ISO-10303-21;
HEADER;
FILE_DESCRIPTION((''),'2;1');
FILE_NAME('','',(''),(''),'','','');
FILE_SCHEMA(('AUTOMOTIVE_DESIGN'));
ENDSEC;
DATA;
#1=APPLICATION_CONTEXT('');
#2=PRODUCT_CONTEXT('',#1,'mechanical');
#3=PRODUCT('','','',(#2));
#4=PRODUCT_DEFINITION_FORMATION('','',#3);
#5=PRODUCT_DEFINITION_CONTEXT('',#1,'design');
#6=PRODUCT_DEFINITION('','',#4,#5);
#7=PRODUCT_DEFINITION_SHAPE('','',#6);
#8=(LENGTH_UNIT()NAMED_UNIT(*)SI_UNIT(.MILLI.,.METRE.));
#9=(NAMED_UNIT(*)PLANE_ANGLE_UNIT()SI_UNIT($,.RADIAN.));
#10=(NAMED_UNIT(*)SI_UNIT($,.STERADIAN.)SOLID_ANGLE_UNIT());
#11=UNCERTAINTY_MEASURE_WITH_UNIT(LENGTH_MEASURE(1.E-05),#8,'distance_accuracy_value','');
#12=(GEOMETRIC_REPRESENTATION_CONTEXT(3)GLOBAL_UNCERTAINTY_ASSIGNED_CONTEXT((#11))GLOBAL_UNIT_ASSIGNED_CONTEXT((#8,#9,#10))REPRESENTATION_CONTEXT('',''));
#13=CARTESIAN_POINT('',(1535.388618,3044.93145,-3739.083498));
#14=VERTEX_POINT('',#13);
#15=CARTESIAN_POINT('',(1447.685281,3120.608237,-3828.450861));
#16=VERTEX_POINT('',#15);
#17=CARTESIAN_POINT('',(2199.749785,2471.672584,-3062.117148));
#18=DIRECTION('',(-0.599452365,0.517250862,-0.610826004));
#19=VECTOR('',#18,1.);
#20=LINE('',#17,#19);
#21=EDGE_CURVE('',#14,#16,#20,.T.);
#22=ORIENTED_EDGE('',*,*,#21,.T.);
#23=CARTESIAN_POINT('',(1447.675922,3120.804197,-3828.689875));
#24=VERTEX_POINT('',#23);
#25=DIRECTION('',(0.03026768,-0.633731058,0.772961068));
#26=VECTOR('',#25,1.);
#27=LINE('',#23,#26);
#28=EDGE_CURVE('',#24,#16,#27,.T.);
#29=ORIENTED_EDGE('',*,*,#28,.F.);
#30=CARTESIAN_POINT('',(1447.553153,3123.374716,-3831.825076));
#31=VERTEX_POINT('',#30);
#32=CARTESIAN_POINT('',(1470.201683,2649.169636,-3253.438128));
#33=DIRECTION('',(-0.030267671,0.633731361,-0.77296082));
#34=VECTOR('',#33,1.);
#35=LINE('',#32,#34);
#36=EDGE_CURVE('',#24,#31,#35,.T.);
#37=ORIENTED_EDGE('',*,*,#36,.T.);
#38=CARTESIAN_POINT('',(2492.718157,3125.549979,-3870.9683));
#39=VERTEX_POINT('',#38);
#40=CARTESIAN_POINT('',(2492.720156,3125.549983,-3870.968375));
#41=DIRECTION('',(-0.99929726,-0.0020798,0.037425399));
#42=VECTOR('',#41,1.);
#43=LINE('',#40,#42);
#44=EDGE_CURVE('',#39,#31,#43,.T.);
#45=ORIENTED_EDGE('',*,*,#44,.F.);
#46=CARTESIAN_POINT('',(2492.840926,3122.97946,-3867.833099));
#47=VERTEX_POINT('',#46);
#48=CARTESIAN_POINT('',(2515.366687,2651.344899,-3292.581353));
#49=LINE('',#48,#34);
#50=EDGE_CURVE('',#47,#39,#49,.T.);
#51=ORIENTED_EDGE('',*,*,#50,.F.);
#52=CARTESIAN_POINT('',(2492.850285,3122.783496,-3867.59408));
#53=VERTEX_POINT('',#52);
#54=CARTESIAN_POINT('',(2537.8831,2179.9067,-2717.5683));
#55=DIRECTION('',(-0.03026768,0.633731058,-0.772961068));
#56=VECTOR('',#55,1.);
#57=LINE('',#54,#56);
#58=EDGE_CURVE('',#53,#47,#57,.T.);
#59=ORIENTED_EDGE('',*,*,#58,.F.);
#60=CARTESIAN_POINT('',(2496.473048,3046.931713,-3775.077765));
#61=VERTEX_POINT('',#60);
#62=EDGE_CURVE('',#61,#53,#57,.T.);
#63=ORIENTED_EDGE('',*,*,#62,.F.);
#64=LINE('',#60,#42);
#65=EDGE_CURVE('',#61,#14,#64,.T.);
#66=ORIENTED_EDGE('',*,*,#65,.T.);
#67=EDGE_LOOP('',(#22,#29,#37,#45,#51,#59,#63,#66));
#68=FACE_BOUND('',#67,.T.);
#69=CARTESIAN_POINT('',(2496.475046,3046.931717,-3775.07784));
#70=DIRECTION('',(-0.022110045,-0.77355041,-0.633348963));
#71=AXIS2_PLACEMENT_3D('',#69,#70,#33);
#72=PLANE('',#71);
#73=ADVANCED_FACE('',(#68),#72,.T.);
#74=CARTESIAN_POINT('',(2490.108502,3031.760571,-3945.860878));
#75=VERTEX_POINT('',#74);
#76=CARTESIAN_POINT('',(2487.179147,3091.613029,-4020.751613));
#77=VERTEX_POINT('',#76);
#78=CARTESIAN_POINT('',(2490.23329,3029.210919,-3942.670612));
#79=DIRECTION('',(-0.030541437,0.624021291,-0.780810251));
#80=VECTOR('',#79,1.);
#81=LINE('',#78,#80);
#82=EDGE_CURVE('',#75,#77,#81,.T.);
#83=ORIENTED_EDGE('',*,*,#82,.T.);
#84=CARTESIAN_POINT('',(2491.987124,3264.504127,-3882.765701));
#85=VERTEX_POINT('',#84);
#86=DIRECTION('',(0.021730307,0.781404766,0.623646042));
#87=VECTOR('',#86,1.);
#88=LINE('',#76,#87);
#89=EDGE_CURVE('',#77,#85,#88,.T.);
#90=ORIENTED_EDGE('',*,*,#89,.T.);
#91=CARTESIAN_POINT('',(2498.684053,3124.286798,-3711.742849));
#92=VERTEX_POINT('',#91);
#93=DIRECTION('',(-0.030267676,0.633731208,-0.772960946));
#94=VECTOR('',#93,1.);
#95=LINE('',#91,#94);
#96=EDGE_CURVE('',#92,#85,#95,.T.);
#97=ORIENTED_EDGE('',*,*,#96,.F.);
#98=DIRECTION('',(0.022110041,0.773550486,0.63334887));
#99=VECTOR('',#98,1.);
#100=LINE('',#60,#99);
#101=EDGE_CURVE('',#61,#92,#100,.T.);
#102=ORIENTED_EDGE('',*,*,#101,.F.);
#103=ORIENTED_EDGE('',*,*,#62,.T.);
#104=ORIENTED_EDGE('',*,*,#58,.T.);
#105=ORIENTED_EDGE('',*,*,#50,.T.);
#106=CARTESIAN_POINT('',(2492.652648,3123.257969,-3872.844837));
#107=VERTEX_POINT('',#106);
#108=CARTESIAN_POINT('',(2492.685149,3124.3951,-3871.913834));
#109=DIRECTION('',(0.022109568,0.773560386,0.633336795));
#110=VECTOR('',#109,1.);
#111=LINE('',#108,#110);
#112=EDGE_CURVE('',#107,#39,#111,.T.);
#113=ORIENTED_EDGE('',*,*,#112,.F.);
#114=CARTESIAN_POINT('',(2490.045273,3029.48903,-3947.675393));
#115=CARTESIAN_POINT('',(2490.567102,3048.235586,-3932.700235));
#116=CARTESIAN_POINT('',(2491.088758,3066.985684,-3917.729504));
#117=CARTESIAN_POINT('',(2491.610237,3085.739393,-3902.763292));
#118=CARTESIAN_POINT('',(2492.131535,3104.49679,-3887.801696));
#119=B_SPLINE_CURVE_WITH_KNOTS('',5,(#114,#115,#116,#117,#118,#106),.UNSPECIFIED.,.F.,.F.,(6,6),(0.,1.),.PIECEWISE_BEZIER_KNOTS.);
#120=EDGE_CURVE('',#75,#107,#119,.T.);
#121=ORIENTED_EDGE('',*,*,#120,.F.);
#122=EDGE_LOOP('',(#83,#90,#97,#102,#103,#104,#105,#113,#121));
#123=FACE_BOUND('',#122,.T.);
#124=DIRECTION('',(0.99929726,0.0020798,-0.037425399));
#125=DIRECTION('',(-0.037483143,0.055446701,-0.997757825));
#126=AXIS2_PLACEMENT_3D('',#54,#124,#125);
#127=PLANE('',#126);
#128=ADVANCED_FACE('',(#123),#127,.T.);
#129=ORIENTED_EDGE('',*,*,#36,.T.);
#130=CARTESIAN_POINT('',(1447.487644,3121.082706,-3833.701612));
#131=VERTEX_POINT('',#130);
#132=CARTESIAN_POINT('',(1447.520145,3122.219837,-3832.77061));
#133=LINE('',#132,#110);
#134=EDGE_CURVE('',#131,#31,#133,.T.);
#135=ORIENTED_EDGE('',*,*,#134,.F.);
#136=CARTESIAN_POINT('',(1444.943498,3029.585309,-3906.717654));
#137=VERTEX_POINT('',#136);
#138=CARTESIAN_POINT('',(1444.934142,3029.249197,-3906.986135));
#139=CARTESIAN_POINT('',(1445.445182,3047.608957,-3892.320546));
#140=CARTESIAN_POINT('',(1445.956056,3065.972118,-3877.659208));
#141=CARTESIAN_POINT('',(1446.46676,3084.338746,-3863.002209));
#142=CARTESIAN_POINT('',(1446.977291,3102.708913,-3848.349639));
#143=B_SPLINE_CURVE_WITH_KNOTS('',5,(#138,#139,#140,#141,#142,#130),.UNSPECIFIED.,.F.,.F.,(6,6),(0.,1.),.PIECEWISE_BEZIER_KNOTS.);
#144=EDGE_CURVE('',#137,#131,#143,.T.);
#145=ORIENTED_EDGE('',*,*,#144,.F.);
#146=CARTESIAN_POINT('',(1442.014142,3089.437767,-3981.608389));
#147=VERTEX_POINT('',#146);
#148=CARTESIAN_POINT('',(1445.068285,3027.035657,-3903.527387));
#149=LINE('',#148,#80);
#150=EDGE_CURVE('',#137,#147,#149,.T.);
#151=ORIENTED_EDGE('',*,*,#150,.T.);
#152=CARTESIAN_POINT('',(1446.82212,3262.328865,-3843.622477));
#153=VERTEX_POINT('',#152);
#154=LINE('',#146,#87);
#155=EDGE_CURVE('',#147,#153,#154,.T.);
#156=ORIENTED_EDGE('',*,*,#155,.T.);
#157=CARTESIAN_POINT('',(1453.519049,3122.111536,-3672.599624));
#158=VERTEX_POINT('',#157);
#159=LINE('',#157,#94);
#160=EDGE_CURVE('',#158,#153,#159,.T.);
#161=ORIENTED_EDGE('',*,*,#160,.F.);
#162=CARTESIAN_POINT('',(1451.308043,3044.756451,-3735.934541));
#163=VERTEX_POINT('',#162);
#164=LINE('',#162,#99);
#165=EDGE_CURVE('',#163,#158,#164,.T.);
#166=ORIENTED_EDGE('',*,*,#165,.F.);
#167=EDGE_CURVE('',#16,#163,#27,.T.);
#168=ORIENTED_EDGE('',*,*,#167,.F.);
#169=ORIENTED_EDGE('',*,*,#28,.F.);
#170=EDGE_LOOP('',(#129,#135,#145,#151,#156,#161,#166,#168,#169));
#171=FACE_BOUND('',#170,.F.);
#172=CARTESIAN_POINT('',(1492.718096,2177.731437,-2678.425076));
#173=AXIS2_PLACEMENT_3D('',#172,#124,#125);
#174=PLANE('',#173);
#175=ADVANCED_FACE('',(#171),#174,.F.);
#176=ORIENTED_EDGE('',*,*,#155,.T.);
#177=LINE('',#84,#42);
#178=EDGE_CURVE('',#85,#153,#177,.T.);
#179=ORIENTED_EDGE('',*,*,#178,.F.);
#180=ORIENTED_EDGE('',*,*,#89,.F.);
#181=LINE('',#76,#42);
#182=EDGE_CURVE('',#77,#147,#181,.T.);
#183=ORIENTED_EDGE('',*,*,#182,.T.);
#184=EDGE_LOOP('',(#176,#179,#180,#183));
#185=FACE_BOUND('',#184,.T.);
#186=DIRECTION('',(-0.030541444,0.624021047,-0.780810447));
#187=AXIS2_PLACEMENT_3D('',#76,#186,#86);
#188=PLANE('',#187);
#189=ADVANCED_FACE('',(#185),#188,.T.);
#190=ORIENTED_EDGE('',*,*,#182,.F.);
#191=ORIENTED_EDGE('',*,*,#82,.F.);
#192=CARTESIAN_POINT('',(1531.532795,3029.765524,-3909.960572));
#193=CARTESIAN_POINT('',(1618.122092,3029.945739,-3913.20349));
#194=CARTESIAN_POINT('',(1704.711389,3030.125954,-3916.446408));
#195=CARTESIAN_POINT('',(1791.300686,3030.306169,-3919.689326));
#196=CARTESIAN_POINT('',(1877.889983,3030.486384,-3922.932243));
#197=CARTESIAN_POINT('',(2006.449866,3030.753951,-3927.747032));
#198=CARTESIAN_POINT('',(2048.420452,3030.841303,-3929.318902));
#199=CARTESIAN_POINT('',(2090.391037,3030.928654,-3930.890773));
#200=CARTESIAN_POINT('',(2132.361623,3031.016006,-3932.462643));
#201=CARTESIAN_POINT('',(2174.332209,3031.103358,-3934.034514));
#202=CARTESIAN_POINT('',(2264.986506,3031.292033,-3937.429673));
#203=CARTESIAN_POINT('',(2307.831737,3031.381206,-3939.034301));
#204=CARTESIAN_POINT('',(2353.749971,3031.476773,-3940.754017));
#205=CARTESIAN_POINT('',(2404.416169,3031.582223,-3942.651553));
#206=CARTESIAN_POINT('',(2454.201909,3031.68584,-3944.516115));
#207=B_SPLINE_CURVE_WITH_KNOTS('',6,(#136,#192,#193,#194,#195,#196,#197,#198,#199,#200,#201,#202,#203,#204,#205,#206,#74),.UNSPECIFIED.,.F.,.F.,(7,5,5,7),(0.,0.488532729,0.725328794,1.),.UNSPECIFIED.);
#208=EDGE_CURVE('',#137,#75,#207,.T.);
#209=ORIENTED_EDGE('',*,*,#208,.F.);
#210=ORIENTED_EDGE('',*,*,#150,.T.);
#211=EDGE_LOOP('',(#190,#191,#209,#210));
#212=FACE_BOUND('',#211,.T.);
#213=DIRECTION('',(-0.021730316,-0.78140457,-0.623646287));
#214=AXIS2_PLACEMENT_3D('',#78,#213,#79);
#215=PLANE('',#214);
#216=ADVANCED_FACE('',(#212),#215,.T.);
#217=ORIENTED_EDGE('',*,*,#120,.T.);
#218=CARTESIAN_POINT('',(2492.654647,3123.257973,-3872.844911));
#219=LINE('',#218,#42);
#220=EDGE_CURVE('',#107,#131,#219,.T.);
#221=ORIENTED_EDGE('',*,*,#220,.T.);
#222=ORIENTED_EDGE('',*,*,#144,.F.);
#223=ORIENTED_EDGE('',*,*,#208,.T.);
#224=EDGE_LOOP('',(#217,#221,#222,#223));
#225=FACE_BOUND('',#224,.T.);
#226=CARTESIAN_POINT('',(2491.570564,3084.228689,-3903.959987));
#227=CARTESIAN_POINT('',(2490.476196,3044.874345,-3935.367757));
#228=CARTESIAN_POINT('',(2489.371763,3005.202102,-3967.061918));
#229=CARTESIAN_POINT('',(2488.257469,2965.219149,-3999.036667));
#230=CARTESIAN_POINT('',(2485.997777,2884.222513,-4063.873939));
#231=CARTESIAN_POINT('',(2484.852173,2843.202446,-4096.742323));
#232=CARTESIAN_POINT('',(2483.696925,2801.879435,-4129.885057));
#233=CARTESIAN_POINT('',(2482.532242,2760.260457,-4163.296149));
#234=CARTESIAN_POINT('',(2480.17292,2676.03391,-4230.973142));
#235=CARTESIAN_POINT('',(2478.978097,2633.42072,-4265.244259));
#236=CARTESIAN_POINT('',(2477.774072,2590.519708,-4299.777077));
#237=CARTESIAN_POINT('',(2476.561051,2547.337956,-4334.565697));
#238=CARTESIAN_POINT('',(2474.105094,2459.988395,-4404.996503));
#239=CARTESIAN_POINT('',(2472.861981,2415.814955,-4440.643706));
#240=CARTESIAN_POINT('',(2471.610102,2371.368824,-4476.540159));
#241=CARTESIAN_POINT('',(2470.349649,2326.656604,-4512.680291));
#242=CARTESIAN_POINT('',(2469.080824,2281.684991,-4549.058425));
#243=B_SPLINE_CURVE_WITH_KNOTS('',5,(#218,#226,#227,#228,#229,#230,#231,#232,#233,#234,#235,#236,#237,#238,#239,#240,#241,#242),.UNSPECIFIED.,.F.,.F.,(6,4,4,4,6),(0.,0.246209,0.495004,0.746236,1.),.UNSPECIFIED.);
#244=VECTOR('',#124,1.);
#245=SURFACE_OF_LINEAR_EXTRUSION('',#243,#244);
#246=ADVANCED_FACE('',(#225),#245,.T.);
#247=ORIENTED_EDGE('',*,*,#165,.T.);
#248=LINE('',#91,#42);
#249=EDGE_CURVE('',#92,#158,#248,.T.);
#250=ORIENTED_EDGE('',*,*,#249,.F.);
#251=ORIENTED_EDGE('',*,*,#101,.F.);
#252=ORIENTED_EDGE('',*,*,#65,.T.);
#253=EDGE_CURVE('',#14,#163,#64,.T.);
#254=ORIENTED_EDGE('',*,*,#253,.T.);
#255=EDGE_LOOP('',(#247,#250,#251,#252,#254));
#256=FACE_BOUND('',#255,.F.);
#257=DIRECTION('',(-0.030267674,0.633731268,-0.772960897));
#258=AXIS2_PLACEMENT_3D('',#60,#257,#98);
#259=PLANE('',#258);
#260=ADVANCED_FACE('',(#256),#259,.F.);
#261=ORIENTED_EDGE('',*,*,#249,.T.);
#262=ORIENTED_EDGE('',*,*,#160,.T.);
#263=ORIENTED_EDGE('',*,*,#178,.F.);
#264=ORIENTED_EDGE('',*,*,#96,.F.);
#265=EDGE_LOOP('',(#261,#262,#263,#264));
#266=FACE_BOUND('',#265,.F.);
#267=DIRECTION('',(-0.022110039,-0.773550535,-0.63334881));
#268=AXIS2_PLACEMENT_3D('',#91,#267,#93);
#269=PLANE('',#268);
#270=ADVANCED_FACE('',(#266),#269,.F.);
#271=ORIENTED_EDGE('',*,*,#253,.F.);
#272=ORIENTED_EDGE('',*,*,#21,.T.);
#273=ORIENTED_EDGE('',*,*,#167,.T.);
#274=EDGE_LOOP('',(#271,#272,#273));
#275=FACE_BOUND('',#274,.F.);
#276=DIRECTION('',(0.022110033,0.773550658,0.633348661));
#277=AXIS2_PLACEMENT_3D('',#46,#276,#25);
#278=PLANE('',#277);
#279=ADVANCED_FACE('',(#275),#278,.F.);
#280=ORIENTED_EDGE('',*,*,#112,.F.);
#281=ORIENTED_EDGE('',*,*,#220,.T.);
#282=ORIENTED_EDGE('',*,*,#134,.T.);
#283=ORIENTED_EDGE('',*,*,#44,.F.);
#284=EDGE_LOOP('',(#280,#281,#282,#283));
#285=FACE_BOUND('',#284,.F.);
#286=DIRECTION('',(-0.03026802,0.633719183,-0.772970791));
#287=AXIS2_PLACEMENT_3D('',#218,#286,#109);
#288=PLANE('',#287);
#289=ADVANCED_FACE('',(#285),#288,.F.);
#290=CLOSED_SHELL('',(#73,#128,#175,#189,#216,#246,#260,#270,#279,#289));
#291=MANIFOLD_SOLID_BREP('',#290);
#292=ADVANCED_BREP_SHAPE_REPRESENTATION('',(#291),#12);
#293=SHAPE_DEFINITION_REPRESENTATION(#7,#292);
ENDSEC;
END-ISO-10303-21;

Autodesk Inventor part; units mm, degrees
sketch "Sketch1" plane through (0, 0, 0) normal (0, 0, 1) x (1, 0, 0)
  arc A0 (4796.3585, -1909.6289) -> (3343.4744, 1121.5056) centre (-3903.1767, -4215.7265) ccw
  line L0 (3236.8192, 1046.7661) -> (3343.5051, 1121.464)
  arc A1 (3228.7635, 1285.3391) -> (1546.1726, 3076.3751) centre (-4110.5601, -3923.7232) ccw
  line L1 (3228.7635, 1285.3391) -> (3122.0787, 1210.6419)
  line L2 (1372.9503, 3176.3452) -> (1308.1705, 3064.1503)
  arc A2 (1372.9503, 3176.3452) -> (93.8576, 4024.2684) centre (-4221.2651, -3873.8147) ccw
  line L3 (1481.3729, 2964.1457) -> (1546.1726, 3076.3751)
  arc A3 (4543.4821, -2147.4888) -> (93.8528, 3844.2289) centre (-4256.4671, -4034.5221) ccw
  line L4 (93.8576, 4024.2684) -> (93.8528, 3844.2289)
  line L5 (1308.1705, 3064.1503) -> (1481.3729, 2964.1457)
  line L6 (3122.0787, 1210.6419) -> (3236.8192, 1046.7661)
  arc A4 (4543.4821, -2147.4888) -> (4796.3585, -1909.6289) centre (4134.8595, -1459.7188) ccw
  point P0 (0, 0)
  dimension "d7" = 800
ref_plane "Work Plane2" through (0, 0, -8101) normal (0, 0, 1) x (1, 0, 0)
ref_plane "Work Plane1" through (0, 0, 0) normal (0, 0, 1) x (1, 0, 0)
sketch "Sketch2" plane through (0, 0, -8101) normal (0, 0, 1) x (1, 0, 0)
  arc A0 (1192.0552, 3508.338) -> (93.8528, 4294.485) centre (-5164.5547, -4211.3454) ccw projected
  arc A1 (3133.8513, 1483.0798) -> (1365.2603, 3408.338) centre (-5051.6105, -4261.3276) ccw projected
  arc A2 (4543.6426, -2147.8414) -> (93.8528, 4114.0508) centre (-5207.4444, -4365.1147) ccw projected
  line L0 (1192.0552, 3508.338) -> (1126.9741, 3395.6142) projected
  line L1 (1365.2603, 3408.338) -> (1300.1792, 3295.6142) projected
  line L2 (1126.9741, 3395.6142) -> (1300.1792, 3295.6142) projected
  line L3 (93.8528, 4294.485) -> (93.8528, 4114.0508) projected
  line L4 (3027.6129, 1408.6909) -> (3133.8513, 1483.0798) projected
  line L5 (3142.3282, 1244.8605) -> (3248.5665, 1319.2494) projected
  line L6 (3027.6129, 1408.6909) -> (3142.3282, 1244.8605) projected
  arc A3 (4803.6655, -1899.2732) -> (3248.5665, 1319.2494) centre (-4832.968, -4570.4704) ccw projected
  arc A4 (4543.6426, -2147.8414) -> (4803.6655, -1899.2732) centre (4135.0016, -1460.0824) ccw projected
  point P0 (0, 0)
loft "Loft1" add profiles "Sketch1", "Sketch2"
ref_plane "Work Plane3" through (2600, 0, 0) normal (1, 0, 0) x (0, 1, 0)
sketch "Sketch3" plane through (2600, 0, 0) normal (1, 0, 0) x (0, 1, 0)
  line L0 (3120.8038, -3828.6818) -> (2179.9067, -2717.5683)
  line L1 (2179.9067, -2717.5683) -> (2281.1646, -4539.693)
  line L2 (2281.1646, -4539.693) -> (3120.8038, -3828.6818)
  line L3 (4534.6211, 332.5956) -> (-2270.5383, 332.5956)
  line L4 (-2270.5383, 332.5956) -> (-2270.5383, -8394.1003)
  line L5 (-2270.5383, -8394.1003) -> (4534.6211, -8394.1003)
  line L6 (4534.6211, -8394.1003) -> (4534.6211, 332.5956)
  point P0 (0, 0)
extrude "Extrusion1" cut sketch "Sketch3" along normal through all both and the other way through all
sketch "Sketch5" plane through (2219.0112, 2281.1646, -4539.693) normal (0, -0.9984595, -0.0554857) x (1, 0, 0)
  line L0 (318.8718, 1824.936) -> (250.4195, 0)
  point P0 (-2219.0112, 4659.2715)
ref_plane "Work Plane4" through (2537.8831, 2179.9067, -2717.5683) normal (-0.6423359, -0.7662012, -0.0184479) x (-0.0374831, 0.0554467, -0.9977578)
sketch "Sketch6" plane through (2537.8831, 2179.9067, -2717.5683) normal (-0.6423359, -0.7662012, -0.0184479) x (-0.0374831, 0.0554467, -0.9977578)
  line L0 (-729.0595, -1938.3665) -> (2085.591, -1938.3665)
  line L1 (2085.591, -1938.3665) -> (2085.591, 179.9667)
  line L2 (2085.591, 179.9667) -> (-729.0595, 179.9667)
  line L3 (-729.0595, 179.9667) -> (-729.0595, -1938.3665)
  point P0 (-2737.216, -722.0143)
extrude "Extrusion2" cut sketch "Sketch6" against normal through all
ref_plane "Work Plane5" through (2537.8831, 2179.9067, -2717.5683) normal (-0.9992973, -0.0020798, 0.0374254) x (-0.0374831, 0.0554467, -0.9977578)
sketch "Sketch7" plane through (2537.8831, 2179.9067, -2717.5683) normal (-0.9992973, -0.0020798, 0.0374254) x (-0.0374831, 0.0554467, -0.9977578)
  line L0 (1826.2193, 0) -> (0, 0) projected
  line L1 (1201.6643, -877.7967) -> (1826.2193, 0) projected
  line L2 (0, 0) -> (1201.6643, -877.7967) projected
  point P0 (-2737.216, 2025.7624)
sketch "Sketch8" plane through (2537.8831, 2179.9067, -2717.5683) normal (-0.6423359, -0.7662012, -0.0184479) x (-0.0374831, 0.0554467, -0.9977578)
  line L0 (1826.2193, 0) -> (0, 0) projected
  line L1 (1201.6643, -1365.6093) -> (1826.2193, 0) projected
  line L2 (0, 0) -> (1201.6643, -1365.6093) projected
  point P0 (-2737.216, -722.0143)
loft "Loft2" add profiles "Sketch7" section 1 edges at (2503.6569, 2230.5357, -3628.6306) (1958.4447, 2700.9842, -4184.1874) (1992.6709, 2650.3553, -3273.125)
sketch "Sketch9" plane through (2537.8831, 2179.9067, -2717.5683) normal (0.9992973, 0.0020798, -0.0374254) x (-0.0374831, 0.0554467, -0.9977578)
  line L0 (1201.6643, 877.7967) -> (0, 0) projected
  line L1 (1826.2193, 0) -> (1201.6643, 877.7967) projected
  line L2 (1201.6643, 877.7967) -> (1104.7642, 807.0127)
  line L3 (1201.6643, 877.7967) -> (1271.2326, 780.0202)
  line L4 (1271.2326, 780.0202) -> (1352.713, 837.9938)
  line L5 (1104.7642, 807.0127) -> (1045.7775, 887.7628)
  line L6 (1045.7775, 887.7628) -> (1224.4425, 1018.2748)
  line L7 (1352.713, 837.9938) -> (1224.4425, 1018.2748)
  point P0 (-2737.216, -2025.7624)
  dimension "d23" = 120
  dimension "d24" = 120
  dimension "d25" = 100
  dimension "d26" = 100
extrude "Extrusion3" add sketch "Sketch9" against normal blind 1045.9
sketch "Sketch10" plane through (2537.8831, 2179.9067, -2717.5683) normal (0.9992973, 0.0020798, -0.0374254) x (-0.0374831, 0.0554467, -0.9977578)
  spline S0 degree 5 poles (1206.6873, 877.7967) (1235.6092, 837.1011) (1264.8055, 796.0647) (1294.2703, 754.695) (1323.9982, 712.9995) (1384.2838, 628.5301) (1414.847, 585.7495) (1445.6675, 542.6512) (1476.7397, 499.2425) (1539.6833, 411.3906) (1571.5596, 366.9415) (1603.6814, 322.1905) (1636.0432, 277.145) (1701.5649, 186.0221) (1734.7295, 139.9388) (1768.128, 93.5694) (1801.7552, 46.9208) (1835.6058, 0) knots 0 0 0 0 0 0 0.246209 0.246209 0.246209 0.246209 0.495004 0.495004 0.495004 0.495004 0.746236 0.746236 0.746236 0.746236 1 1 1 1 1 1 projected
  line L0 (1104.7642, 807.0127) -> (0, 0) projected
  line L1 (1826.2193, 0) -> (0, 0) projected
  line L2 (1835.6058, 0) -> (1826.2193, 0) projected
  line L3 (1104.7642, 807.0127) -> (1204.9396, 880.1893)
  line L4 (1201.4146, 877.6143) -> (1104.7642, 807.0127) projected
  line L5 (1206.6873, 877.7967) -> (1204.9396, 880.1893)
  point P0 (-2737.216, -2025.7624)
extrude "Extrusion4" cut sketch "Sketch10" against normal blind 2000
properties part number "panel_block_03" material "Wood (Maple)"
